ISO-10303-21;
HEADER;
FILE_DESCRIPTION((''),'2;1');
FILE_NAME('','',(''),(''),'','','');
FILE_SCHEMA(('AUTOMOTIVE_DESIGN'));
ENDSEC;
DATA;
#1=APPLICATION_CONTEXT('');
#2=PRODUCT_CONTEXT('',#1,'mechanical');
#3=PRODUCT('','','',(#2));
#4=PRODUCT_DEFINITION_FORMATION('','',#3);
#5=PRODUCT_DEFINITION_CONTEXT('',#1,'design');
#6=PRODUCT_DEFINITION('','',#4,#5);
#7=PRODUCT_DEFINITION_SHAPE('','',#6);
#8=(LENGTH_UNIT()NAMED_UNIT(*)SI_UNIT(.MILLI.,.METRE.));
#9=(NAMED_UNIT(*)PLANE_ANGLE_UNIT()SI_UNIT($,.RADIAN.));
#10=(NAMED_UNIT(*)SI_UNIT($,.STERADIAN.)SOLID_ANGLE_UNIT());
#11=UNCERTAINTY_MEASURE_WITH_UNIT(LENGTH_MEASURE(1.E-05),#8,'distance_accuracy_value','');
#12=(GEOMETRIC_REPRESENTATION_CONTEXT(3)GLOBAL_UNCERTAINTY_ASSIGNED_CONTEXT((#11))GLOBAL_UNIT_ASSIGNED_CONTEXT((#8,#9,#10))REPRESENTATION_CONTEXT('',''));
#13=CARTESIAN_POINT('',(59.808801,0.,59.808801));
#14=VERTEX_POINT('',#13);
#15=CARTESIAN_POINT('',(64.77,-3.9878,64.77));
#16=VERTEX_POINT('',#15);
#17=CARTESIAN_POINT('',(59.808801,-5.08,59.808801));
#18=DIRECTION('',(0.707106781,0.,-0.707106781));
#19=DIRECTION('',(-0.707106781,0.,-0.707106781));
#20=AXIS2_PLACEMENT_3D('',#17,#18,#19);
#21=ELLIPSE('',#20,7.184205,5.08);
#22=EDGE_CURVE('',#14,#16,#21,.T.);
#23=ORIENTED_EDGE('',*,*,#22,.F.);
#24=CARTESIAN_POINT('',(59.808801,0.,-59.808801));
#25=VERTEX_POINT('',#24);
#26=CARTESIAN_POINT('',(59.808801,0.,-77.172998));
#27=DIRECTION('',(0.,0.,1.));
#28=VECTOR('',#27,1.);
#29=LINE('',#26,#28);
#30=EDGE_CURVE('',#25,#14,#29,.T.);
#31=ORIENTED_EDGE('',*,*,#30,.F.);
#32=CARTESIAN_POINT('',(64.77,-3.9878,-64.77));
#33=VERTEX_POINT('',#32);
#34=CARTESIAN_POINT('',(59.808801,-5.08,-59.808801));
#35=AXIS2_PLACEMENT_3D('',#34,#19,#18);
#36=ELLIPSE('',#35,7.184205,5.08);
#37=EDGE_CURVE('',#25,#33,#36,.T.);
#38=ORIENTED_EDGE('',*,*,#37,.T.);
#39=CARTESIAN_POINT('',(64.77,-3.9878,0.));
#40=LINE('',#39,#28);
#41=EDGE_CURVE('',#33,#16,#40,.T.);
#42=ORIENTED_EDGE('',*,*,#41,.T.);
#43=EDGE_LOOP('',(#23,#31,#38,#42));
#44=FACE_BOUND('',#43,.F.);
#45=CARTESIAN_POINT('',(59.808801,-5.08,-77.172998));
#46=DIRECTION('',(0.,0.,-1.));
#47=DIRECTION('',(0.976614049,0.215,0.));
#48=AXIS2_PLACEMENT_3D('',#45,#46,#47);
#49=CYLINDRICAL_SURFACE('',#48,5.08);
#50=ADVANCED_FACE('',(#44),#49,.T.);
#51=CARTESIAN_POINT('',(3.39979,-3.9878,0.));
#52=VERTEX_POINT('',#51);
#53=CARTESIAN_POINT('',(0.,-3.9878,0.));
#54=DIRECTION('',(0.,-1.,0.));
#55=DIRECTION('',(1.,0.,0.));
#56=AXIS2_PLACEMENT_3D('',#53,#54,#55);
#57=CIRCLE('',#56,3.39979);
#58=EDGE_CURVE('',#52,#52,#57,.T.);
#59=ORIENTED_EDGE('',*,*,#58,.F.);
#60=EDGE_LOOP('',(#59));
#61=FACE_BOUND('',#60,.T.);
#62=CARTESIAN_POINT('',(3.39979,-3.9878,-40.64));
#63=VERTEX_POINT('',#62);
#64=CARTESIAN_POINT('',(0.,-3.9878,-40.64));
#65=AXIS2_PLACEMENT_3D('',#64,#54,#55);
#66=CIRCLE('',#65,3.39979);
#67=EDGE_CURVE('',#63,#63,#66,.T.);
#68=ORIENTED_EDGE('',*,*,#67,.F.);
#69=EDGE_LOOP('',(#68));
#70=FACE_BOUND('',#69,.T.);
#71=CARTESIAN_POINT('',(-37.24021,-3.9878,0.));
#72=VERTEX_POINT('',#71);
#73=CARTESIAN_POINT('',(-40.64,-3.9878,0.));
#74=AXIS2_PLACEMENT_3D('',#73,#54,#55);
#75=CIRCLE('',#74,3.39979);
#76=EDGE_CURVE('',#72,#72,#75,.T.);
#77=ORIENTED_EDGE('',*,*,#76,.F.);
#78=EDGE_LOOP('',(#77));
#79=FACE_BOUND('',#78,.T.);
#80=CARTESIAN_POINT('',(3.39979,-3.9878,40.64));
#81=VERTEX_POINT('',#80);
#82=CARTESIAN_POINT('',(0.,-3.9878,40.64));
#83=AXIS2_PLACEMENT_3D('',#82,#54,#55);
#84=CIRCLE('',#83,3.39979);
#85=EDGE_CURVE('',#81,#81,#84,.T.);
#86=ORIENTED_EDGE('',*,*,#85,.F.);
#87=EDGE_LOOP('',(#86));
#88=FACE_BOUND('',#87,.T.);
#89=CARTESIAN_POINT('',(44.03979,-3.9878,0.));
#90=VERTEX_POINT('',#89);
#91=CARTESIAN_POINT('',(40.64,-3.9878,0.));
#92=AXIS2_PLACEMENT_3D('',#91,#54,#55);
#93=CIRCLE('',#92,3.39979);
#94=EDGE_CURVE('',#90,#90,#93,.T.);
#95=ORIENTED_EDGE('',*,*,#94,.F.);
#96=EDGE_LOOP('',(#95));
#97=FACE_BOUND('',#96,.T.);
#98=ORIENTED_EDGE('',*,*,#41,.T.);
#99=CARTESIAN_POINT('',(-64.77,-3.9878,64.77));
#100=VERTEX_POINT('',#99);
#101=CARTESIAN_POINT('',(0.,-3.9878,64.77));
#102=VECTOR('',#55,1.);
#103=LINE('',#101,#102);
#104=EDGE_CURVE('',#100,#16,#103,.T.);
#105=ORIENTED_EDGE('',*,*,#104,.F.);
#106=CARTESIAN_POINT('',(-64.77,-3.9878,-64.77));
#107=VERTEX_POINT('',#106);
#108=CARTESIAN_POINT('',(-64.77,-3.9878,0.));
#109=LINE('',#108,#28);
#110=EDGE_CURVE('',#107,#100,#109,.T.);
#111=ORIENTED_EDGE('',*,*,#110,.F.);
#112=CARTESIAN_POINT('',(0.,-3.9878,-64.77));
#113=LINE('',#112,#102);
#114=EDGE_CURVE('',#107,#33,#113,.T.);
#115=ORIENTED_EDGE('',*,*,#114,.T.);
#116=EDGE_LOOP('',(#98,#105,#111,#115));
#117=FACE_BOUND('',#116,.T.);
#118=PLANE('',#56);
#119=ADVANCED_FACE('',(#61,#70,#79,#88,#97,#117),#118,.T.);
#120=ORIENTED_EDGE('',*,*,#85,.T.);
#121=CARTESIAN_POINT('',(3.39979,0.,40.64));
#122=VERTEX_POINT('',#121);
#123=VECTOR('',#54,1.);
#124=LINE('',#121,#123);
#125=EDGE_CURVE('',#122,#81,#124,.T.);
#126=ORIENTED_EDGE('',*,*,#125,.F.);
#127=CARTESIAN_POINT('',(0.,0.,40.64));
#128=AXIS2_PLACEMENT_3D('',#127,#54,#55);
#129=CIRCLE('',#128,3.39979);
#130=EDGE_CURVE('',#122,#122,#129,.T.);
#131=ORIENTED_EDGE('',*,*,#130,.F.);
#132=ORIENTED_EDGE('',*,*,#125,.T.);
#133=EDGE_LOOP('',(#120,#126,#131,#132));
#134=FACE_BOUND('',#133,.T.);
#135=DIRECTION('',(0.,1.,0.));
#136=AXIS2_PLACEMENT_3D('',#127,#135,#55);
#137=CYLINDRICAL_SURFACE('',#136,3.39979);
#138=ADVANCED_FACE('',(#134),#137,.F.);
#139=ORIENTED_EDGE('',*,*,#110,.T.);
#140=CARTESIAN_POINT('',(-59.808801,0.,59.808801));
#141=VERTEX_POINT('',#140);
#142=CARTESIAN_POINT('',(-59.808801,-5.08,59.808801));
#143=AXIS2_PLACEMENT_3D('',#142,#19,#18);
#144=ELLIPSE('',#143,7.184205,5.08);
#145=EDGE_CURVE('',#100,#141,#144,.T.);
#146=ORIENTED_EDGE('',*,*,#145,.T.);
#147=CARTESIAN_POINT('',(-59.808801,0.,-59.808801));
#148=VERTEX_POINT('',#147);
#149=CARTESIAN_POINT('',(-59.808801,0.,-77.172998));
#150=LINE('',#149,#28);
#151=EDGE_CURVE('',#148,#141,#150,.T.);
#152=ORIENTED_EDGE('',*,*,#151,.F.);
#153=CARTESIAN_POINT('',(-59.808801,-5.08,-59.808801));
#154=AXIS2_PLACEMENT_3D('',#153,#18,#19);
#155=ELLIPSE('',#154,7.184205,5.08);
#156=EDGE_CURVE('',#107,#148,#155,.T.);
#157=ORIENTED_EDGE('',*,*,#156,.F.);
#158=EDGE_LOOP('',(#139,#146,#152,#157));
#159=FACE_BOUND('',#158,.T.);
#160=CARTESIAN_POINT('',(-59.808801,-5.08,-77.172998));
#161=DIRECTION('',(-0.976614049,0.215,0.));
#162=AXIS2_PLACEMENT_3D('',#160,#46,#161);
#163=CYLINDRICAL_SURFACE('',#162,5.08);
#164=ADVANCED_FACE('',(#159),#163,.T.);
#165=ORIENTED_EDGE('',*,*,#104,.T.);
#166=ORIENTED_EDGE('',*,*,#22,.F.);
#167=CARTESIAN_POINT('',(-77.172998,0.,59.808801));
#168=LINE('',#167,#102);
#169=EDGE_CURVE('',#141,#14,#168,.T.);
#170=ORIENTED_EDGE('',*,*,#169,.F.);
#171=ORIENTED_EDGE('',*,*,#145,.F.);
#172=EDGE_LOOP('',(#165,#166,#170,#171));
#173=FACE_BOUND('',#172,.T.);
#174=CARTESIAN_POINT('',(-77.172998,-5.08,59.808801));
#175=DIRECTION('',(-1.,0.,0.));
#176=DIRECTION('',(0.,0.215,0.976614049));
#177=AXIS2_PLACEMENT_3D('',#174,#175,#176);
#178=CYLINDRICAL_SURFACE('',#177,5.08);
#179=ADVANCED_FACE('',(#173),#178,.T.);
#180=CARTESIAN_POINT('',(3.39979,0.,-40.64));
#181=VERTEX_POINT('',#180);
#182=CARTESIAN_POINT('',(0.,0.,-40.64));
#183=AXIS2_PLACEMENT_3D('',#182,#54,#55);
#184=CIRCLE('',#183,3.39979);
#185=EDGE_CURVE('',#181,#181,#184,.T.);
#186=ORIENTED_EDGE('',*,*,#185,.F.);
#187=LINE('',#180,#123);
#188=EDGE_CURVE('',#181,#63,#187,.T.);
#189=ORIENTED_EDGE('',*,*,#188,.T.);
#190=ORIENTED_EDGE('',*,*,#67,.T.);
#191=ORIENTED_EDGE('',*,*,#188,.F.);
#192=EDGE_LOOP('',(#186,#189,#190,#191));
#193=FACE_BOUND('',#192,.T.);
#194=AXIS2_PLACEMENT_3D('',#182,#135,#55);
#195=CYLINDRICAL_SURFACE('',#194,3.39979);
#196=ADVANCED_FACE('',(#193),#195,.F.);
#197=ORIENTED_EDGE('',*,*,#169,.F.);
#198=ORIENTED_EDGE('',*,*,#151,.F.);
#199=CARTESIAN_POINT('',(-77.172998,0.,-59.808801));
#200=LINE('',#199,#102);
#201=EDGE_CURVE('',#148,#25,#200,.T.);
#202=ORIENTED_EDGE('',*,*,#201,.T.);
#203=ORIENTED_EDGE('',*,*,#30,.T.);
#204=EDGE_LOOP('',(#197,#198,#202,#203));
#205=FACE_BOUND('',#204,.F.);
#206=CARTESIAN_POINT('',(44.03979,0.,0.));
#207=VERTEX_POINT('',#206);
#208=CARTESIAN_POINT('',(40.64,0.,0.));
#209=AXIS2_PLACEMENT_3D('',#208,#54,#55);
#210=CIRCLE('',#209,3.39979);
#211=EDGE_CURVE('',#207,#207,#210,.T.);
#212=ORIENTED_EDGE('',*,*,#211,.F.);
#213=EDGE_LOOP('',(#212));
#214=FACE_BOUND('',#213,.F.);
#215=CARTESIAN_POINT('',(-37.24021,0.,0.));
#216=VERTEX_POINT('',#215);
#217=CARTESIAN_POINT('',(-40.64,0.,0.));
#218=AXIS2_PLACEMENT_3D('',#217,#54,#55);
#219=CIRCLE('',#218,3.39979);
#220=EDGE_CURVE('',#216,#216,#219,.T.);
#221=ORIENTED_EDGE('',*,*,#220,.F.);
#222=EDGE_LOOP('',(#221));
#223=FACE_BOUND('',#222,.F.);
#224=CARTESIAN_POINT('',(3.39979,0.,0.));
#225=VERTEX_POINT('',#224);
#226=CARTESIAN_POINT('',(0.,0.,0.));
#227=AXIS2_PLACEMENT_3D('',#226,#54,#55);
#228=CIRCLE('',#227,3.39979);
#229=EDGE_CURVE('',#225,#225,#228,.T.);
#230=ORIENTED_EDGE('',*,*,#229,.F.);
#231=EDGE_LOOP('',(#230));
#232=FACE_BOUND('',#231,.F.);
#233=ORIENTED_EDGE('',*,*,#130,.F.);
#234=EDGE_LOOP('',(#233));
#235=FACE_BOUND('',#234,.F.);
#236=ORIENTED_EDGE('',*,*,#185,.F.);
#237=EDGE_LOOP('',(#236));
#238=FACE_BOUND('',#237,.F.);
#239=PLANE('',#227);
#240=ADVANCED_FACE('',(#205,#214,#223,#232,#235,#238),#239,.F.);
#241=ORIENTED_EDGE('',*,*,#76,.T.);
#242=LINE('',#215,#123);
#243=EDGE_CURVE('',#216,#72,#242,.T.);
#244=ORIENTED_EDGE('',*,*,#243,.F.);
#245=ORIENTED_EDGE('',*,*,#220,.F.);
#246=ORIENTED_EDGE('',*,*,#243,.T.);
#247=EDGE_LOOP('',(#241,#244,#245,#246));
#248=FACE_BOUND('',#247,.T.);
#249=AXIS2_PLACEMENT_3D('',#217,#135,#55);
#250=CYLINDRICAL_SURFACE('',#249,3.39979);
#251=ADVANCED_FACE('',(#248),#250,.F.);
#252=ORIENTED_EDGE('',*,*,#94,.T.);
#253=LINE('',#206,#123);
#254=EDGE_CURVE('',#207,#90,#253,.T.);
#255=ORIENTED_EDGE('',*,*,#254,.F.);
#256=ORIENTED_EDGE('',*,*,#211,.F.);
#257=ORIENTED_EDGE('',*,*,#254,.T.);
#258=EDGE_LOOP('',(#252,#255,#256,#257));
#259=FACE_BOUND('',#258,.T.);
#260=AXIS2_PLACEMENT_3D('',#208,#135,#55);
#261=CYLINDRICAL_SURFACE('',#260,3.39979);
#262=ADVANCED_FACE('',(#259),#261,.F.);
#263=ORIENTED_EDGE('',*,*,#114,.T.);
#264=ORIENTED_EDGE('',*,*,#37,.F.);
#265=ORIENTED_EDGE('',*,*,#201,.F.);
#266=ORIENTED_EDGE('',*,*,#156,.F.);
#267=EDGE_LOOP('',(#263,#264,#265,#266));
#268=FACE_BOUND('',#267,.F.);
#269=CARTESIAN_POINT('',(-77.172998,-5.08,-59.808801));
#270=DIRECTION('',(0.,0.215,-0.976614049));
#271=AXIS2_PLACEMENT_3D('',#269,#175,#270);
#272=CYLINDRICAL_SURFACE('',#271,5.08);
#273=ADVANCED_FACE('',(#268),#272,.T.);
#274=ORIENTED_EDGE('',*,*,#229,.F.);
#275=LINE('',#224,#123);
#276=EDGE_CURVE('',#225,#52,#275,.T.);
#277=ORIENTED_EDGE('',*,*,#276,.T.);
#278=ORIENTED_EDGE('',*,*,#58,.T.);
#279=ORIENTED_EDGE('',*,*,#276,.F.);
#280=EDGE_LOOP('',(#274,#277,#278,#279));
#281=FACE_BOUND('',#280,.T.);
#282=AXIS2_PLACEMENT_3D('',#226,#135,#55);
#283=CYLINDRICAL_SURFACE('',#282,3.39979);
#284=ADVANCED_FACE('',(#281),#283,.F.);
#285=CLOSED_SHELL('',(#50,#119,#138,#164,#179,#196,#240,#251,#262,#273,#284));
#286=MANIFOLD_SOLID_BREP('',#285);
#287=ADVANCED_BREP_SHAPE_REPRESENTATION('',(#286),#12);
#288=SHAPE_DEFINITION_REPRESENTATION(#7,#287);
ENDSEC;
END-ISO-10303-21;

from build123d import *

# Parameters (mm, degrees)
F0_W        = 129.54
F0_H        = 129.54
F0_R        = 3.39979
F1_DEPTH    = 3.9878
F2_T1_DEPTH = 154.3459968354
F2_T3_DEPTH = 154.3459968354


# Not quite as in the source:
# - a fillet or chamfer that OpenCascade refuses, or shapes differently, is made with other operations: its cross-section is extruded or revolved along the edge and cut away or added


with BuildPart() as f1:
    # F0 (on Front) → F1 (new body)
    with BuildSketch(Plane.XZ):
        Rectangle(F0_W, F0_H)
        with Locations((0, -40.64)):
            Circle(F0_R, mode=Mode.SUBTRACT)
        with Locations((-40.64, 0)):
            Circle(F0_R, mode=Mode.SUBTRACT)
        Circle(F0_R, mode=Mode.SUBTRACT)
        with Locations((40.64, 0)):
            Circle(F0_R, mode=Mode.SUBTRACT)
        with Locations((0, 40.64)):
            Circle(F0_R, mode=Mode.SUBTRACT)
    extrude(amount=F1_DEPTH)

    # F2: fillet of radius 5.08 on 4 edges, made by hand

    # F2_s2 → F2_t1 (cut)
    with BuildSketch(Plane.XY.offset(-77.1729984177)):
        with BuildLine():
            ThreePointArc((-64.77, -3.9878), (-62.9914115108, -1.1205318539), (-59.8088006329, 0))
            Line((-59.8088006329, 0), (-64.77, 0))
            Line((-64.77, 0), (-64.77, -3.9878))
        make_face()
        with BuildLine():
            ThreePointArc((64.77, -3.9878), (62.9914115108, -1.1205318539), (59.8088006329, 0))
            Line((59.8088006329, 0), (64.77, 0))
            Line((64.77, 0), (64.77, -3.9878))
        make_face()
    extrude(amount=F2_T1_DEPTH, mode=Mode.SUBTRACT)

    # F2_s4 → F2_t3 (cut)
    with BuildSketch(Plane.YZ.offset(-77.1729984177)):
        with BuildLine():
            ThreePointArc((-3.9878, -64.77), (-1.1205318539, -62.9914115108), (0, -59.8088006329))
            Line((0, -59.8088006329), (0, -64.77))
            Line((0, -64.77), (-3.9878, -64.77))
        make_face()
        with BuildLine():
            ThreePointArc((-3.9878, 64.77), (-1.1205318539, 62.9914115108), (0, 59.8088006329))
            Line((0, 59.8088006329), (0, 64.77))
            Line((0, 64.77), (-3.9878, 64.77))
        make_face()
    extrude(amount=F2_T3_DEPTH, mode=Mode.SUBTRACT)


solid = f1.part
